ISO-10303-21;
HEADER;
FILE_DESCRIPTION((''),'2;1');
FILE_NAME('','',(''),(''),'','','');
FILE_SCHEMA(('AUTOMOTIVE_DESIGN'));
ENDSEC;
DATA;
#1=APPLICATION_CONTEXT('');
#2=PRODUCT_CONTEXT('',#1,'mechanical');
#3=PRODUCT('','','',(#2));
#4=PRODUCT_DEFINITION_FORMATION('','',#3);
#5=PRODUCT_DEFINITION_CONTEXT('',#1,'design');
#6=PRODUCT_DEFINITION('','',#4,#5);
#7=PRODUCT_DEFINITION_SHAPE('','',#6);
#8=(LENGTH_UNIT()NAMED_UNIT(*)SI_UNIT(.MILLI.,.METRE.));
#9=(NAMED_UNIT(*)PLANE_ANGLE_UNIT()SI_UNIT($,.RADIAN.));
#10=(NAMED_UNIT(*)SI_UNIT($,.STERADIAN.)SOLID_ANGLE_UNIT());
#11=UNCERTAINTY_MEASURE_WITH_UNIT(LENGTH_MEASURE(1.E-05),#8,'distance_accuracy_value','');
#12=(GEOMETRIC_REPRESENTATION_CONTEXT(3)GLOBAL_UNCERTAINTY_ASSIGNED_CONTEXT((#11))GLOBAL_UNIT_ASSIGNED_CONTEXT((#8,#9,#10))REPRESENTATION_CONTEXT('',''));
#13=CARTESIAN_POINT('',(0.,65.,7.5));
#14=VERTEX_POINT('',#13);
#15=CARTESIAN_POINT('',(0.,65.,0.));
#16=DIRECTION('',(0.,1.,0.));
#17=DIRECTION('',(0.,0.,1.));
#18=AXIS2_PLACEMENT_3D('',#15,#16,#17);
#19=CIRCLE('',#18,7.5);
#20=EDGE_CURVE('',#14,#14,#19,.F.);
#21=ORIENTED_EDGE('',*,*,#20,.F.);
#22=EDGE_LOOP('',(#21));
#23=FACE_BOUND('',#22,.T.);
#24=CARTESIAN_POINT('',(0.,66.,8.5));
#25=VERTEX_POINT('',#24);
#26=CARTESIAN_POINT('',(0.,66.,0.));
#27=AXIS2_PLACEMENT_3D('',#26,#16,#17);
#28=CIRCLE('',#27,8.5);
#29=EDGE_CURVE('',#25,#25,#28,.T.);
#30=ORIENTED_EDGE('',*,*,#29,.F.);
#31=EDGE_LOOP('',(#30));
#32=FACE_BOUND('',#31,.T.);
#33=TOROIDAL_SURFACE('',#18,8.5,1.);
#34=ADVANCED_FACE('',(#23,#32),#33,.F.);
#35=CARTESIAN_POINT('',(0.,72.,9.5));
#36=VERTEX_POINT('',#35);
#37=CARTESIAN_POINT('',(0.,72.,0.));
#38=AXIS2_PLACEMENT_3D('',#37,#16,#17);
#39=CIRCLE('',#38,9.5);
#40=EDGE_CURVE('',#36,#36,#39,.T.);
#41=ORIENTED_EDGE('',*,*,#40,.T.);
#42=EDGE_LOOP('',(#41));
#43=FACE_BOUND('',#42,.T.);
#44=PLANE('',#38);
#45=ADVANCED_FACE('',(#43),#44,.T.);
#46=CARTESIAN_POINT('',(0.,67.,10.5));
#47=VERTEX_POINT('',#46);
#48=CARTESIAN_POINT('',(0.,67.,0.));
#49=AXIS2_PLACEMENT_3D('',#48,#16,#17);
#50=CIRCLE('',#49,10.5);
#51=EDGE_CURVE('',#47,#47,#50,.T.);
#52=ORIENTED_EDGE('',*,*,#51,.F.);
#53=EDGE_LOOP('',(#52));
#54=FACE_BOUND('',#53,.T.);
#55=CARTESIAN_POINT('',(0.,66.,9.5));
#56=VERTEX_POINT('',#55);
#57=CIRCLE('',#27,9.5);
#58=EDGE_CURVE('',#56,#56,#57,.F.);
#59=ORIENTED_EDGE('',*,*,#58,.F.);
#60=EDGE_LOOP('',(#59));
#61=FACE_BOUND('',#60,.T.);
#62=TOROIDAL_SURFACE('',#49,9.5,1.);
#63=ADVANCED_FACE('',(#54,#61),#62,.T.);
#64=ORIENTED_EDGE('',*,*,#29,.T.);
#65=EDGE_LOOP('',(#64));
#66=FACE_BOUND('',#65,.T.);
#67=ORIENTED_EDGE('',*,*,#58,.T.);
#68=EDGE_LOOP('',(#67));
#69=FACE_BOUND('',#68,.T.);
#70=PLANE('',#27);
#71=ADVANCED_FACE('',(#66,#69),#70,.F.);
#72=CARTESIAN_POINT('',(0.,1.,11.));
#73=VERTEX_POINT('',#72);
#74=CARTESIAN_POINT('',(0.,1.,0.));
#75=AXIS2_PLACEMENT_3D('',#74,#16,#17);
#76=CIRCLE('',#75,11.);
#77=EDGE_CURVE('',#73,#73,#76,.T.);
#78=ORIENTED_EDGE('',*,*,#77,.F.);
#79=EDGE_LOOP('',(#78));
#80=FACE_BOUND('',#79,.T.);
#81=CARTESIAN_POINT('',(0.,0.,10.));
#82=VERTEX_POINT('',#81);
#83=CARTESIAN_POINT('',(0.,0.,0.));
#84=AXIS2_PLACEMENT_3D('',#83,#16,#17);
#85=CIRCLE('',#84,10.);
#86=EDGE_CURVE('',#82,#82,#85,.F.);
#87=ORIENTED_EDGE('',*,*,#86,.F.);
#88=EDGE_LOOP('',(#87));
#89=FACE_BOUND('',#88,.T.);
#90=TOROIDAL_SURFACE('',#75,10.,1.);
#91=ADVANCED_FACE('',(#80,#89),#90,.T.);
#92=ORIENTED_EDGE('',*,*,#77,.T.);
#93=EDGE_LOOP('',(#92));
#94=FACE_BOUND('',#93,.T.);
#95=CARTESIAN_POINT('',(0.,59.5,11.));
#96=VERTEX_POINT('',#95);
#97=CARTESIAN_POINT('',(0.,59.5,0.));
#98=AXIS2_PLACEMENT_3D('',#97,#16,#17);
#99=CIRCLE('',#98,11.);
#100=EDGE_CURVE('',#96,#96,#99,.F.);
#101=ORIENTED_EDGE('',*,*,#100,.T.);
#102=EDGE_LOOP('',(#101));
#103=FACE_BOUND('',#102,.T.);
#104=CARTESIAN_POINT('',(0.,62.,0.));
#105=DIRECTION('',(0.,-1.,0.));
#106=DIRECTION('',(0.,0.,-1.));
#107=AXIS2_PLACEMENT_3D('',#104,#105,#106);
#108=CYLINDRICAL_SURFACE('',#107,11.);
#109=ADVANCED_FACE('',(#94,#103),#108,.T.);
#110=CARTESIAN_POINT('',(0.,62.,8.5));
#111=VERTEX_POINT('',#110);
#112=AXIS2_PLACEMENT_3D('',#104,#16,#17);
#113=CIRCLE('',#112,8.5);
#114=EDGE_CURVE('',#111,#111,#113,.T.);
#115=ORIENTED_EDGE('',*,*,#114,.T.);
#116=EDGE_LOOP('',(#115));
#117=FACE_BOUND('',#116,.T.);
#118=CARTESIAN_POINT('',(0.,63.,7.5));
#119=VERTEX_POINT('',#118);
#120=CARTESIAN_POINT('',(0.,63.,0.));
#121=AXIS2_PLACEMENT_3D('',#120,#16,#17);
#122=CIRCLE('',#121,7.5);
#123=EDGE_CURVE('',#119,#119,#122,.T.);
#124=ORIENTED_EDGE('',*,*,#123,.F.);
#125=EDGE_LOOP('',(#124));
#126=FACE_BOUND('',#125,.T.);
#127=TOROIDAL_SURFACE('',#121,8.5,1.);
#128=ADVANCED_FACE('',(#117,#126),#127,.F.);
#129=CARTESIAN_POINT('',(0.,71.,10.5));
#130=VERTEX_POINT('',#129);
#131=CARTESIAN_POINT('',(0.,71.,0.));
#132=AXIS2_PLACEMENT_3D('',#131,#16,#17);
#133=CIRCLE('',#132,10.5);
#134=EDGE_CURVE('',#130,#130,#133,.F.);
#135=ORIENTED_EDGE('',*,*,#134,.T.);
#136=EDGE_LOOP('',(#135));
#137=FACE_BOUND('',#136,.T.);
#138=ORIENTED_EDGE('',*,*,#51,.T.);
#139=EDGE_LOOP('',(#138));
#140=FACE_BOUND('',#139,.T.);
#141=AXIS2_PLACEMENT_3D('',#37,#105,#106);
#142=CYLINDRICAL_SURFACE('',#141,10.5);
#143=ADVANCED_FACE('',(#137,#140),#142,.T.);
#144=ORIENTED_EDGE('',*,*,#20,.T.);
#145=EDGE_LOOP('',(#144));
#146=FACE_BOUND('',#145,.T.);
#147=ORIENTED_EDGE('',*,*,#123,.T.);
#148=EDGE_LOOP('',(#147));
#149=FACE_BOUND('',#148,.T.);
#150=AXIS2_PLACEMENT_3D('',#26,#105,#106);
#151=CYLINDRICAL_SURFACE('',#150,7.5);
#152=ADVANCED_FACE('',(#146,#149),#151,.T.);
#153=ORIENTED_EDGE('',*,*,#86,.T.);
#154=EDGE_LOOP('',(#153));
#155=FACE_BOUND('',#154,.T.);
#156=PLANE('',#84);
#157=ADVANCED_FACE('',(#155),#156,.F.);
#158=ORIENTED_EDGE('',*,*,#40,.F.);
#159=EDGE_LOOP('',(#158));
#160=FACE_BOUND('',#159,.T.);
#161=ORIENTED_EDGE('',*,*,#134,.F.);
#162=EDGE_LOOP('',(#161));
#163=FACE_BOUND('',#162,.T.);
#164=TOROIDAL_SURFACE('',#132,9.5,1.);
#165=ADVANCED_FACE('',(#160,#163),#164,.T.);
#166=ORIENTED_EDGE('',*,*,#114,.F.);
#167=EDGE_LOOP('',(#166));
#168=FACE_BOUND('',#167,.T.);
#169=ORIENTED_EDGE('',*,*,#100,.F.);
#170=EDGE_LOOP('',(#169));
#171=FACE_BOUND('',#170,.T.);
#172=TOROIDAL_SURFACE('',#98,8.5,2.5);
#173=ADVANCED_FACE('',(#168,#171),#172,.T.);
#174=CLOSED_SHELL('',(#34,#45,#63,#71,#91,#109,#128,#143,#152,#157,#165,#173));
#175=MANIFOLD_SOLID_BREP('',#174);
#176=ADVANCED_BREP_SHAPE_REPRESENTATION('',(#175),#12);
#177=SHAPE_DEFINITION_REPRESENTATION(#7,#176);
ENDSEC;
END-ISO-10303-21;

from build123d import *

# Parameters (mm, degrees)
CROQUIS1_R              = 11
SALIENTE_EXTRUIR1_DEPTH = 62
CROQUIS2_R              = 7.5
SALIENTE_EXTRUIR2_DEPTH = 4
CROQUIS3_R              = 10.5
SALIENTE_EXTRUIR3_DEPTH = 6
REDONDEO1_R             = 2.5
REDONDEO2_R             = 1
REDONDEO3_R             = 1


with BuildPart() as part:
    # Croquis1 → Saliente-Extruir1 (new body)
    with BuildSketch(Plane(origin=(0, 0, 0), x_dir=(1, 0, 0), z_dir=(0, 1, 0))):
        with Locations(Location((0, 0, 0), (0, 0, 270))):
            Circle(CROQUIS1_R)
    extrude(amount=SALIENTE_EXTRUIR1_DEPTH)

    # Croquis2 → Saliente-Extruir2 (add)
    with BuildSketch(Plane(origin=(0, 62, 0), x_dir=(1, 0, 0), z_dir=(0, 1, 0))):
        with Locations(Location((0, 0, 0), (0, 0, 270))):
            Circle(CROQUIS2_R)
    extrude(amount=SALIENTE_EXTRUIR2_DEPTH)

    # Croquis3 → Saliente-Extruir3 (add)
    with BuildSketch(Plane(origin=(0, 66, 0), x_dir=(1, 0, 0), z_dir=(0, 1, 0))):
        with Locations(Location((0, 0, 0), (0, 0, 270))):
            Circle(CROQUIS3_R)
    extrude(amount=SALIENTE_EXTRUIR3_DEPTH)

    # Redondeo1
    redondeo1_edges = [part.edges().sort_by_distance(p)[0] for p in [
        (0, 62, -11),
    ]]
    fillet(redondeo1_edges, radius=REDONDEO1_R)

    # Redondeo2
    redondeo2_edges = [part.edges().sort_by_distance(p)[0] for p in [
        (0, 72, -10.5),
        (0, 62, -7.5),
        (0, 66, -7.5),
        (0, 66, -10.5),
    ]]
    fillet(redondeo2_edges, radius=REDONDEO2_R - 0.0001)  # a hair under: the kernel refuses the full size

    # Redondeo3
    redondeo3_edges = [part.edges().sort_by_distance(p)[0] for p in [
        (0, 0, -11),
    ]]
    fillet(redondeo3_edges, radius=REDONDEO3_R)


solid = part.part
